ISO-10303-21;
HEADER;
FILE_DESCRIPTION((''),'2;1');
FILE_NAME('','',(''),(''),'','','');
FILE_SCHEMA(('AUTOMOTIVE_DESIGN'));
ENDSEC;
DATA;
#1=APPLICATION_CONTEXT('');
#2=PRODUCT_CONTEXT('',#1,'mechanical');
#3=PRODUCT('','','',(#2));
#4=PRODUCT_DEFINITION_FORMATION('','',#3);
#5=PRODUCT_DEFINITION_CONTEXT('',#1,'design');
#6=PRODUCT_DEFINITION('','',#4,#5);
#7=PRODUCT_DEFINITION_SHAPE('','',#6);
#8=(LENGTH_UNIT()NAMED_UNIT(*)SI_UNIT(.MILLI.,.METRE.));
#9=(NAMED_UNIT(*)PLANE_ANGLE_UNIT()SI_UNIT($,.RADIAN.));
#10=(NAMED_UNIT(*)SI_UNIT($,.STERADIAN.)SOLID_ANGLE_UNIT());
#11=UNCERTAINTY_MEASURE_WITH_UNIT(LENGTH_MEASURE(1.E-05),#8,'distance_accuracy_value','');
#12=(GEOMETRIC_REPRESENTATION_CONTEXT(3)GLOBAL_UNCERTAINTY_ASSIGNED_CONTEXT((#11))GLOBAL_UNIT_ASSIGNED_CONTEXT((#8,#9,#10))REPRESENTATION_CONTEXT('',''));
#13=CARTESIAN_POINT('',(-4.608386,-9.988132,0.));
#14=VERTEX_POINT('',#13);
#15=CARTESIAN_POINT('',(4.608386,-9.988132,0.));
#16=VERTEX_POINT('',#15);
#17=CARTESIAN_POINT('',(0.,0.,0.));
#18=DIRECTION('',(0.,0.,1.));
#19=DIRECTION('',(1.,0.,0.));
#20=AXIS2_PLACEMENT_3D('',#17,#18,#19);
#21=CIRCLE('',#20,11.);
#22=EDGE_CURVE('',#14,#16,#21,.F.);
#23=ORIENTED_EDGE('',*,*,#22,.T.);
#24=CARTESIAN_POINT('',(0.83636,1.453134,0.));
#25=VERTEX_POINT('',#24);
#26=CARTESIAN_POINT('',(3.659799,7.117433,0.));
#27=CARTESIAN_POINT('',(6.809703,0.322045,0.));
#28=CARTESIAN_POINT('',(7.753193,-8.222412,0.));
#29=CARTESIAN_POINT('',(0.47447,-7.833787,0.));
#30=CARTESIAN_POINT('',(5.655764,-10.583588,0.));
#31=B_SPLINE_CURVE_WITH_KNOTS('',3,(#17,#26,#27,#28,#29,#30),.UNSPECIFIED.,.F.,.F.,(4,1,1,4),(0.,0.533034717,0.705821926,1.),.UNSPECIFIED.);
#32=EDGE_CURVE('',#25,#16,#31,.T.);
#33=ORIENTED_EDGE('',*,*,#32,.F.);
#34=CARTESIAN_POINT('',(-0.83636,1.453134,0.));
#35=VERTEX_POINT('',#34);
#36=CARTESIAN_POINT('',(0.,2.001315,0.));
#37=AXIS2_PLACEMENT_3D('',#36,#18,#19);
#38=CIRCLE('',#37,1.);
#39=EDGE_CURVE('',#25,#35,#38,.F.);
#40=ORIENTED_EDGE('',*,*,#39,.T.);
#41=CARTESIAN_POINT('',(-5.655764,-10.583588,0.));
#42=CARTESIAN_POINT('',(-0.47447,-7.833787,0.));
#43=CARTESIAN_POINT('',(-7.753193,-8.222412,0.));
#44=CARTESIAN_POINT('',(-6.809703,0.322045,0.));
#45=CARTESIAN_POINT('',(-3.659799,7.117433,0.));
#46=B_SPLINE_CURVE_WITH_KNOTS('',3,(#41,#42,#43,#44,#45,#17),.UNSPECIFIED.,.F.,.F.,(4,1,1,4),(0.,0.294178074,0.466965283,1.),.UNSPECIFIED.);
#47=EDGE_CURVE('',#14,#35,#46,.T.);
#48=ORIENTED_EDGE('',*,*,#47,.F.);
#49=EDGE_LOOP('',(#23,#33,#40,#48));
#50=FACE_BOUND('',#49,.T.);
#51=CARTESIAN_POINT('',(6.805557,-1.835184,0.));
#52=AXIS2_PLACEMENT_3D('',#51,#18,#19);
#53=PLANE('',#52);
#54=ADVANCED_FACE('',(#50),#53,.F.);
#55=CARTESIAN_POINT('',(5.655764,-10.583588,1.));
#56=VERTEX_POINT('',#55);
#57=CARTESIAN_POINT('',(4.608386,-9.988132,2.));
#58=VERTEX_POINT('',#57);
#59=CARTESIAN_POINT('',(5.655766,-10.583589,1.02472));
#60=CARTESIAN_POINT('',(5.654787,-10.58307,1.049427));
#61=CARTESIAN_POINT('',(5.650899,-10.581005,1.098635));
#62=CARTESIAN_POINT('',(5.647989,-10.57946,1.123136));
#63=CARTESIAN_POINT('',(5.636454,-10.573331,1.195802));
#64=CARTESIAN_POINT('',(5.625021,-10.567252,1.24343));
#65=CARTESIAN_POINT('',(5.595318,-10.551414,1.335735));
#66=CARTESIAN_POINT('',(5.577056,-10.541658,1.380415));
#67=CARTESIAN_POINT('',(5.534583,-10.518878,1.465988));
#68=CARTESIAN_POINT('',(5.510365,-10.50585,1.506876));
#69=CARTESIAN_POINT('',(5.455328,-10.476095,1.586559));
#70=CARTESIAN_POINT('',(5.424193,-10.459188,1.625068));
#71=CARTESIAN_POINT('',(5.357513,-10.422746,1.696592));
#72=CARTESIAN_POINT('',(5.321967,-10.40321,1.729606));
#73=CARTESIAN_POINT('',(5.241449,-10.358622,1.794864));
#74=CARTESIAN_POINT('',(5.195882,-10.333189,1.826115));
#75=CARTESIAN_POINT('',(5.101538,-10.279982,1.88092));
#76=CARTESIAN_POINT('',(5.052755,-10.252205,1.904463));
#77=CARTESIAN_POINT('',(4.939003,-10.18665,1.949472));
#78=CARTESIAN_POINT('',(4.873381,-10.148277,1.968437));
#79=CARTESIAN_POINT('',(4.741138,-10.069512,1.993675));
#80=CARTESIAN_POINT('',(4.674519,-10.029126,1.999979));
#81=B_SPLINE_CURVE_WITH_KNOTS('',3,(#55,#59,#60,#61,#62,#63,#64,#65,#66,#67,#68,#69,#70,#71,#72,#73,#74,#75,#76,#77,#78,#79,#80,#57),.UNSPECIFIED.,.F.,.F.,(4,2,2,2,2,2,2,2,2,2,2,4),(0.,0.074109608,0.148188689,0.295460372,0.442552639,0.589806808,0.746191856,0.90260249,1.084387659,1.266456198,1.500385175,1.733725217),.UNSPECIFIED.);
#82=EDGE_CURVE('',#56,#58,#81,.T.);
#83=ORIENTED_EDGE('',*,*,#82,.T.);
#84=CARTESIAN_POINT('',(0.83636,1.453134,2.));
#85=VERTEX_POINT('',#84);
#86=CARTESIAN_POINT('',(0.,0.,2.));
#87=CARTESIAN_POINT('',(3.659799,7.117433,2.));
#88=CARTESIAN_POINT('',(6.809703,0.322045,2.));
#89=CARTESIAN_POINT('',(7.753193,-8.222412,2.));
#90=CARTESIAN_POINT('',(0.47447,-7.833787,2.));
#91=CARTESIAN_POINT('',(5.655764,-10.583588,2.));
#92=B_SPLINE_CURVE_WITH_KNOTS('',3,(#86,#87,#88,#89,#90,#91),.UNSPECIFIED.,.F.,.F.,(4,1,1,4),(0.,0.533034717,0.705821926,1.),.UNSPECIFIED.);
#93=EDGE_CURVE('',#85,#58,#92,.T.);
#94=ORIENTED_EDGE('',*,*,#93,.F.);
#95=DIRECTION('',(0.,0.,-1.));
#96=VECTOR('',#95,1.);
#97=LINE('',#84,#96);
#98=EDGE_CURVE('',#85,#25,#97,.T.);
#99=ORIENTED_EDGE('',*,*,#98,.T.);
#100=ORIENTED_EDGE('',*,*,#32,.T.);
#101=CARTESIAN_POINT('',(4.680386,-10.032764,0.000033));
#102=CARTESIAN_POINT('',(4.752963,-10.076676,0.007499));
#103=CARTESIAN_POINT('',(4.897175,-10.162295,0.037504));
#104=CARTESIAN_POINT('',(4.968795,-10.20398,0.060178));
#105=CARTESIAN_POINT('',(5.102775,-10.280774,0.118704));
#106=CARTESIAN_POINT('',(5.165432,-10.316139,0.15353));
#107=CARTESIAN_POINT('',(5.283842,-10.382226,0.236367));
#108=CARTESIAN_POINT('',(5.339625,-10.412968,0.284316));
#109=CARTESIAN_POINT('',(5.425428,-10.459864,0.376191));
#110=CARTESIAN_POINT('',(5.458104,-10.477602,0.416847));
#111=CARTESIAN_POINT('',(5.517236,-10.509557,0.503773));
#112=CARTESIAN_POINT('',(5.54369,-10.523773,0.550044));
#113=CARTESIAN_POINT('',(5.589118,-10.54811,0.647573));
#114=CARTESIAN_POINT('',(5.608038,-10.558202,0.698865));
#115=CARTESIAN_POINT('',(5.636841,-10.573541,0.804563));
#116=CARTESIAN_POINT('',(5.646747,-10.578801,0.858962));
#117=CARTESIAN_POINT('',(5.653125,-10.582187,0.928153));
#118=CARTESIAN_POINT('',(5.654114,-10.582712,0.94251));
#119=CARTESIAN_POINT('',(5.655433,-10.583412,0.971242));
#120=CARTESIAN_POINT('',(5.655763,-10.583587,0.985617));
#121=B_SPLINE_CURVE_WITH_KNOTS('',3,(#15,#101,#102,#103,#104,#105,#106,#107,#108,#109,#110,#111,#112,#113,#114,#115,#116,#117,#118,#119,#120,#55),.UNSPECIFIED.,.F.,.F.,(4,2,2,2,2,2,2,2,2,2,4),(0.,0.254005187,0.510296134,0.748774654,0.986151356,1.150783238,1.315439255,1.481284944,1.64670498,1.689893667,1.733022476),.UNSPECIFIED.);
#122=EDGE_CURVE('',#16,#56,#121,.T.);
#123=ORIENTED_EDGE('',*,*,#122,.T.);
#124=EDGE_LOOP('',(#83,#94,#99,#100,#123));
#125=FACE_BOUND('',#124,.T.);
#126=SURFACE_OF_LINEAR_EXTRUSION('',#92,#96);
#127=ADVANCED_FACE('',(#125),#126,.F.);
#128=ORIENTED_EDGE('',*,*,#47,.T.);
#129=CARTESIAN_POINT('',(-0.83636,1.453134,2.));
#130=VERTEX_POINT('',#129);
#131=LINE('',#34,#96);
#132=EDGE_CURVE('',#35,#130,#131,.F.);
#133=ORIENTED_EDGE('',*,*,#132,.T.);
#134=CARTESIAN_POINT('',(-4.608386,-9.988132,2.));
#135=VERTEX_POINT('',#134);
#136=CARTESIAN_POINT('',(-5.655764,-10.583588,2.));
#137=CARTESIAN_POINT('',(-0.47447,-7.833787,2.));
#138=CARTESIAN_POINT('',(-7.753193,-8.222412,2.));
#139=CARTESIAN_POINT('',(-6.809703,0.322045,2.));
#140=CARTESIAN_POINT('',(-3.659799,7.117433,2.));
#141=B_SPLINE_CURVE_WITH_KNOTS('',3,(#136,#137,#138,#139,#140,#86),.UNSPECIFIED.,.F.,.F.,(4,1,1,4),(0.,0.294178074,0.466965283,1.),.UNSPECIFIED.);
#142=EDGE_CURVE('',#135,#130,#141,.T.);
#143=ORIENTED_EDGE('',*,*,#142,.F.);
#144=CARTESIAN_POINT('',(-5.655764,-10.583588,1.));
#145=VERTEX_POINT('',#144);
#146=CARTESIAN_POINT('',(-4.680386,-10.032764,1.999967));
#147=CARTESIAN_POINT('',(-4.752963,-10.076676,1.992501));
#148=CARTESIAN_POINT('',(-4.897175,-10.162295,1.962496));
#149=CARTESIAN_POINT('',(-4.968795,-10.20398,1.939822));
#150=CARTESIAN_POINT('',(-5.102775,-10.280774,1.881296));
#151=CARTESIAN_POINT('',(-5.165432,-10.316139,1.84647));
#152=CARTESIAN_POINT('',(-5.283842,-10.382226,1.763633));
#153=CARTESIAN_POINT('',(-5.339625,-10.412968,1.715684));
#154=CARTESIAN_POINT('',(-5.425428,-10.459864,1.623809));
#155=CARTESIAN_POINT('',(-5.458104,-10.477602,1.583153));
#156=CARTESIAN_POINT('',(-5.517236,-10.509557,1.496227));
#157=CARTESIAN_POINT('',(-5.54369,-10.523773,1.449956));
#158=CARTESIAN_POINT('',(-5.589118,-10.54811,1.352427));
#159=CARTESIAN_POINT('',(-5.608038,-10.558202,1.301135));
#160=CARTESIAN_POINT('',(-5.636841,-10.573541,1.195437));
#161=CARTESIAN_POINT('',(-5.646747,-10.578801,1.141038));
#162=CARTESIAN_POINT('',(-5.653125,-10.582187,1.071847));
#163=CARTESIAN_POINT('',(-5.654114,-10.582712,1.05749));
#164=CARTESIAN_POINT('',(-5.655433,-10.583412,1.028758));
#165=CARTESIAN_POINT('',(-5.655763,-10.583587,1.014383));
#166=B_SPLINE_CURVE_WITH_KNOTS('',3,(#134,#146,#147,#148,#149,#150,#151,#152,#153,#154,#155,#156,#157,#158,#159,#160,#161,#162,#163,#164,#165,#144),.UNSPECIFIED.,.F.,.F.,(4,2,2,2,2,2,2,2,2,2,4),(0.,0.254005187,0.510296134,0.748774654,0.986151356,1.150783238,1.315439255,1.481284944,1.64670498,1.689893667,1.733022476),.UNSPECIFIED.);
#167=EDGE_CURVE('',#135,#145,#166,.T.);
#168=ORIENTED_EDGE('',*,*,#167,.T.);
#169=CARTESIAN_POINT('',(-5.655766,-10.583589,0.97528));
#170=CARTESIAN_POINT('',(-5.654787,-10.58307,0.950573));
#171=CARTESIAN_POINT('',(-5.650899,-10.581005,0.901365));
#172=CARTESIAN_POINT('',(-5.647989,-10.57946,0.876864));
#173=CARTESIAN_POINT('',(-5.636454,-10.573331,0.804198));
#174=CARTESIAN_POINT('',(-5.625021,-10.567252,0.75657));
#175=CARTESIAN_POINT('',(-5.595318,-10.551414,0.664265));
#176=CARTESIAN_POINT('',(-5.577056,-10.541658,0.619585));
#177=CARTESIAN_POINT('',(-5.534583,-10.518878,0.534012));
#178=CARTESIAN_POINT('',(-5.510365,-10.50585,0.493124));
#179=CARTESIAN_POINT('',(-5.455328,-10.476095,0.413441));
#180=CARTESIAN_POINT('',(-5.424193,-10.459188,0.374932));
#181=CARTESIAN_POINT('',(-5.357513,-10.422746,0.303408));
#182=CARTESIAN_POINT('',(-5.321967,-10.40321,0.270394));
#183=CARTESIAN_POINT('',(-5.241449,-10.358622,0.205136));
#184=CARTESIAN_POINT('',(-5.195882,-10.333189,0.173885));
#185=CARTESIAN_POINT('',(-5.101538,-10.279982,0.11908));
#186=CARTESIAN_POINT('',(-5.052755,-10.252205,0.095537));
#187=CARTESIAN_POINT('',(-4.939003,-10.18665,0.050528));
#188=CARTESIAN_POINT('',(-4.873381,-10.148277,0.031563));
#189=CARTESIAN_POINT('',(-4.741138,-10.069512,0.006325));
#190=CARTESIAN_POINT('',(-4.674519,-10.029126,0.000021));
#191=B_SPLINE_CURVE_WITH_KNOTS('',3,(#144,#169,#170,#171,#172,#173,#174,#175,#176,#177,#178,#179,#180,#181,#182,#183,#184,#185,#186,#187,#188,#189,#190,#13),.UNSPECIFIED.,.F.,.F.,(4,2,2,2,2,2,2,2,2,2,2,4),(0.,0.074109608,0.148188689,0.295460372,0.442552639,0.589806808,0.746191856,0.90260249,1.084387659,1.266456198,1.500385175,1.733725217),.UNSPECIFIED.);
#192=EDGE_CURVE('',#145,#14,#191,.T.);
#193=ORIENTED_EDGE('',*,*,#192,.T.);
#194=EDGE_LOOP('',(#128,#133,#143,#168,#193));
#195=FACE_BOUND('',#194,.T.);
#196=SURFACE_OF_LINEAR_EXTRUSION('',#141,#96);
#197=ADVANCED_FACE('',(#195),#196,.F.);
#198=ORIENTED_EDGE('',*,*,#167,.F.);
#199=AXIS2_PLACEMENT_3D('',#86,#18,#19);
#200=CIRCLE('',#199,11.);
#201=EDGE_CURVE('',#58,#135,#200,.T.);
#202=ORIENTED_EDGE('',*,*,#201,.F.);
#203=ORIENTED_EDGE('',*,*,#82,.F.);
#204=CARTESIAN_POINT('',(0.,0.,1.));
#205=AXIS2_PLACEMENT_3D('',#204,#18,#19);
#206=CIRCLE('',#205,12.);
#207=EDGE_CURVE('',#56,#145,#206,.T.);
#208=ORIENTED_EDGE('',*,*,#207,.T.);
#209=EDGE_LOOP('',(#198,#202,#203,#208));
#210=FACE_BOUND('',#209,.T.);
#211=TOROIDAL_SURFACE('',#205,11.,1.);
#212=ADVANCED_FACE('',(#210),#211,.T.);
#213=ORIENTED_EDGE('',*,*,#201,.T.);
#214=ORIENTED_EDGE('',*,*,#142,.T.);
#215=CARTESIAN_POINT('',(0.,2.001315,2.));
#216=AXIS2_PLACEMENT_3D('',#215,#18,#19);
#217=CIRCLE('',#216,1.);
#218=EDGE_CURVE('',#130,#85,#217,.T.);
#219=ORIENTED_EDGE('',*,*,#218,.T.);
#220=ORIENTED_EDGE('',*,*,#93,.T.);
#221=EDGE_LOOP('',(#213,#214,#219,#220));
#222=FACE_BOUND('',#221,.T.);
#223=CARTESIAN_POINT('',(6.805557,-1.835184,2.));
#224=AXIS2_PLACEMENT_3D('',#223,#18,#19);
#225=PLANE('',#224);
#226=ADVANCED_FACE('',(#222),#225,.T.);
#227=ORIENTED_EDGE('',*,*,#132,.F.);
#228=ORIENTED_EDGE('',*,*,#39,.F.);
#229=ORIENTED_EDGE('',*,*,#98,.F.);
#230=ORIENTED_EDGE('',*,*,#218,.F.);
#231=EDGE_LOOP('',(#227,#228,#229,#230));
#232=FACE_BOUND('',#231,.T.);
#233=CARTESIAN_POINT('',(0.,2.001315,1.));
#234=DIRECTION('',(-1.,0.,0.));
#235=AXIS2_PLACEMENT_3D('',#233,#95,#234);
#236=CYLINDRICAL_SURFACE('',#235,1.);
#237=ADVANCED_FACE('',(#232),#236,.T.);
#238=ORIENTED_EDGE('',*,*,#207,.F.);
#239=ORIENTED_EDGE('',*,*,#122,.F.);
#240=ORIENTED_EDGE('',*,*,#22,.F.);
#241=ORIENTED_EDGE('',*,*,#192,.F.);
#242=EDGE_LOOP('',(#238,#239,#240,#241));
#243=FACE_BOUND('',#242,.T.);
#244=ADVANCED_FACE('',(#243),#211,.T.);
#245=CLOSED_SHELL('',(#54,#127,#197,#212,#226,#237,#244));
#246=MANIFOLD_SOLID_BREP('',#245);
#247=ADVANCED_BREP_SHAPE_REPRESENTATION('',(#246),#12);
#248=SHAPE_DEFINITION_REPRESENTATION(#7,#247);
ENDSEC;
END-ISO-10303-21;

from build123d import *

# Parameters (mm, degrees)
SALIENTE_EXTRUIR1_DEPTH = 2
REDONDEO1_R             = 1
REDONDEO2_R             = 1


with BuildPart() as part:
    # Croquis1 → Saliente-Extruir1 (new body)
    with BuildSketch(Plane.XY):
        with BuildLine():
            ThreePointArc((5.655764002, -10.583587934), (0, 12), (-5.655764002, -10.583587934))
            add(Edge.make_bspline(
                [(-5.655764002, -10.583587934), (-0.474469774, -7.833786927), (-7.753192635, -8.222412063), (-6.809703352, 0.322044678), (-3.659798819, 7.117432674), (0, 0)],
                knots=[0, 0, 0, 0, 0.294178074, 0.466965283, 1, 1, 1, 1], degree=3))
            add(Edge.make_bspline(
                [(5.655764002, -10.583587934), (0.474469774, -7.833786927), (7.753192635, -8.222412063), (6.809703352, 0.322044678), (3.659798819, 7.117432674), (0, 0)],
                knots=[0, 0, 0, 0, 0.294178074, 0.466965283, 1, 1, 1, 1], degree=3))
        make_face()
    extrude(amount=SALIENTE_EXTRUIR1_DEPTH)

    # Redondeo1
    redondeo1_edges = [part.edges().sort_by_distance(p)[0] for p in [
        (0, 0, 1),
    ]]
    fillet(redondeo1_edges, radius=REDONDEO1_R)

    # Redondeo2
    redondeo2_edges = [part.edges().sort_by_distance(p)[0] for p in [
        (0, 12, 2),
        (0, 12, 0),
    ]]
    fillet(redondeo2_edges, radius=REDONDEO2_R - 0.0001)  # a hair under: the kernel refuses the full size


solid = part.part
